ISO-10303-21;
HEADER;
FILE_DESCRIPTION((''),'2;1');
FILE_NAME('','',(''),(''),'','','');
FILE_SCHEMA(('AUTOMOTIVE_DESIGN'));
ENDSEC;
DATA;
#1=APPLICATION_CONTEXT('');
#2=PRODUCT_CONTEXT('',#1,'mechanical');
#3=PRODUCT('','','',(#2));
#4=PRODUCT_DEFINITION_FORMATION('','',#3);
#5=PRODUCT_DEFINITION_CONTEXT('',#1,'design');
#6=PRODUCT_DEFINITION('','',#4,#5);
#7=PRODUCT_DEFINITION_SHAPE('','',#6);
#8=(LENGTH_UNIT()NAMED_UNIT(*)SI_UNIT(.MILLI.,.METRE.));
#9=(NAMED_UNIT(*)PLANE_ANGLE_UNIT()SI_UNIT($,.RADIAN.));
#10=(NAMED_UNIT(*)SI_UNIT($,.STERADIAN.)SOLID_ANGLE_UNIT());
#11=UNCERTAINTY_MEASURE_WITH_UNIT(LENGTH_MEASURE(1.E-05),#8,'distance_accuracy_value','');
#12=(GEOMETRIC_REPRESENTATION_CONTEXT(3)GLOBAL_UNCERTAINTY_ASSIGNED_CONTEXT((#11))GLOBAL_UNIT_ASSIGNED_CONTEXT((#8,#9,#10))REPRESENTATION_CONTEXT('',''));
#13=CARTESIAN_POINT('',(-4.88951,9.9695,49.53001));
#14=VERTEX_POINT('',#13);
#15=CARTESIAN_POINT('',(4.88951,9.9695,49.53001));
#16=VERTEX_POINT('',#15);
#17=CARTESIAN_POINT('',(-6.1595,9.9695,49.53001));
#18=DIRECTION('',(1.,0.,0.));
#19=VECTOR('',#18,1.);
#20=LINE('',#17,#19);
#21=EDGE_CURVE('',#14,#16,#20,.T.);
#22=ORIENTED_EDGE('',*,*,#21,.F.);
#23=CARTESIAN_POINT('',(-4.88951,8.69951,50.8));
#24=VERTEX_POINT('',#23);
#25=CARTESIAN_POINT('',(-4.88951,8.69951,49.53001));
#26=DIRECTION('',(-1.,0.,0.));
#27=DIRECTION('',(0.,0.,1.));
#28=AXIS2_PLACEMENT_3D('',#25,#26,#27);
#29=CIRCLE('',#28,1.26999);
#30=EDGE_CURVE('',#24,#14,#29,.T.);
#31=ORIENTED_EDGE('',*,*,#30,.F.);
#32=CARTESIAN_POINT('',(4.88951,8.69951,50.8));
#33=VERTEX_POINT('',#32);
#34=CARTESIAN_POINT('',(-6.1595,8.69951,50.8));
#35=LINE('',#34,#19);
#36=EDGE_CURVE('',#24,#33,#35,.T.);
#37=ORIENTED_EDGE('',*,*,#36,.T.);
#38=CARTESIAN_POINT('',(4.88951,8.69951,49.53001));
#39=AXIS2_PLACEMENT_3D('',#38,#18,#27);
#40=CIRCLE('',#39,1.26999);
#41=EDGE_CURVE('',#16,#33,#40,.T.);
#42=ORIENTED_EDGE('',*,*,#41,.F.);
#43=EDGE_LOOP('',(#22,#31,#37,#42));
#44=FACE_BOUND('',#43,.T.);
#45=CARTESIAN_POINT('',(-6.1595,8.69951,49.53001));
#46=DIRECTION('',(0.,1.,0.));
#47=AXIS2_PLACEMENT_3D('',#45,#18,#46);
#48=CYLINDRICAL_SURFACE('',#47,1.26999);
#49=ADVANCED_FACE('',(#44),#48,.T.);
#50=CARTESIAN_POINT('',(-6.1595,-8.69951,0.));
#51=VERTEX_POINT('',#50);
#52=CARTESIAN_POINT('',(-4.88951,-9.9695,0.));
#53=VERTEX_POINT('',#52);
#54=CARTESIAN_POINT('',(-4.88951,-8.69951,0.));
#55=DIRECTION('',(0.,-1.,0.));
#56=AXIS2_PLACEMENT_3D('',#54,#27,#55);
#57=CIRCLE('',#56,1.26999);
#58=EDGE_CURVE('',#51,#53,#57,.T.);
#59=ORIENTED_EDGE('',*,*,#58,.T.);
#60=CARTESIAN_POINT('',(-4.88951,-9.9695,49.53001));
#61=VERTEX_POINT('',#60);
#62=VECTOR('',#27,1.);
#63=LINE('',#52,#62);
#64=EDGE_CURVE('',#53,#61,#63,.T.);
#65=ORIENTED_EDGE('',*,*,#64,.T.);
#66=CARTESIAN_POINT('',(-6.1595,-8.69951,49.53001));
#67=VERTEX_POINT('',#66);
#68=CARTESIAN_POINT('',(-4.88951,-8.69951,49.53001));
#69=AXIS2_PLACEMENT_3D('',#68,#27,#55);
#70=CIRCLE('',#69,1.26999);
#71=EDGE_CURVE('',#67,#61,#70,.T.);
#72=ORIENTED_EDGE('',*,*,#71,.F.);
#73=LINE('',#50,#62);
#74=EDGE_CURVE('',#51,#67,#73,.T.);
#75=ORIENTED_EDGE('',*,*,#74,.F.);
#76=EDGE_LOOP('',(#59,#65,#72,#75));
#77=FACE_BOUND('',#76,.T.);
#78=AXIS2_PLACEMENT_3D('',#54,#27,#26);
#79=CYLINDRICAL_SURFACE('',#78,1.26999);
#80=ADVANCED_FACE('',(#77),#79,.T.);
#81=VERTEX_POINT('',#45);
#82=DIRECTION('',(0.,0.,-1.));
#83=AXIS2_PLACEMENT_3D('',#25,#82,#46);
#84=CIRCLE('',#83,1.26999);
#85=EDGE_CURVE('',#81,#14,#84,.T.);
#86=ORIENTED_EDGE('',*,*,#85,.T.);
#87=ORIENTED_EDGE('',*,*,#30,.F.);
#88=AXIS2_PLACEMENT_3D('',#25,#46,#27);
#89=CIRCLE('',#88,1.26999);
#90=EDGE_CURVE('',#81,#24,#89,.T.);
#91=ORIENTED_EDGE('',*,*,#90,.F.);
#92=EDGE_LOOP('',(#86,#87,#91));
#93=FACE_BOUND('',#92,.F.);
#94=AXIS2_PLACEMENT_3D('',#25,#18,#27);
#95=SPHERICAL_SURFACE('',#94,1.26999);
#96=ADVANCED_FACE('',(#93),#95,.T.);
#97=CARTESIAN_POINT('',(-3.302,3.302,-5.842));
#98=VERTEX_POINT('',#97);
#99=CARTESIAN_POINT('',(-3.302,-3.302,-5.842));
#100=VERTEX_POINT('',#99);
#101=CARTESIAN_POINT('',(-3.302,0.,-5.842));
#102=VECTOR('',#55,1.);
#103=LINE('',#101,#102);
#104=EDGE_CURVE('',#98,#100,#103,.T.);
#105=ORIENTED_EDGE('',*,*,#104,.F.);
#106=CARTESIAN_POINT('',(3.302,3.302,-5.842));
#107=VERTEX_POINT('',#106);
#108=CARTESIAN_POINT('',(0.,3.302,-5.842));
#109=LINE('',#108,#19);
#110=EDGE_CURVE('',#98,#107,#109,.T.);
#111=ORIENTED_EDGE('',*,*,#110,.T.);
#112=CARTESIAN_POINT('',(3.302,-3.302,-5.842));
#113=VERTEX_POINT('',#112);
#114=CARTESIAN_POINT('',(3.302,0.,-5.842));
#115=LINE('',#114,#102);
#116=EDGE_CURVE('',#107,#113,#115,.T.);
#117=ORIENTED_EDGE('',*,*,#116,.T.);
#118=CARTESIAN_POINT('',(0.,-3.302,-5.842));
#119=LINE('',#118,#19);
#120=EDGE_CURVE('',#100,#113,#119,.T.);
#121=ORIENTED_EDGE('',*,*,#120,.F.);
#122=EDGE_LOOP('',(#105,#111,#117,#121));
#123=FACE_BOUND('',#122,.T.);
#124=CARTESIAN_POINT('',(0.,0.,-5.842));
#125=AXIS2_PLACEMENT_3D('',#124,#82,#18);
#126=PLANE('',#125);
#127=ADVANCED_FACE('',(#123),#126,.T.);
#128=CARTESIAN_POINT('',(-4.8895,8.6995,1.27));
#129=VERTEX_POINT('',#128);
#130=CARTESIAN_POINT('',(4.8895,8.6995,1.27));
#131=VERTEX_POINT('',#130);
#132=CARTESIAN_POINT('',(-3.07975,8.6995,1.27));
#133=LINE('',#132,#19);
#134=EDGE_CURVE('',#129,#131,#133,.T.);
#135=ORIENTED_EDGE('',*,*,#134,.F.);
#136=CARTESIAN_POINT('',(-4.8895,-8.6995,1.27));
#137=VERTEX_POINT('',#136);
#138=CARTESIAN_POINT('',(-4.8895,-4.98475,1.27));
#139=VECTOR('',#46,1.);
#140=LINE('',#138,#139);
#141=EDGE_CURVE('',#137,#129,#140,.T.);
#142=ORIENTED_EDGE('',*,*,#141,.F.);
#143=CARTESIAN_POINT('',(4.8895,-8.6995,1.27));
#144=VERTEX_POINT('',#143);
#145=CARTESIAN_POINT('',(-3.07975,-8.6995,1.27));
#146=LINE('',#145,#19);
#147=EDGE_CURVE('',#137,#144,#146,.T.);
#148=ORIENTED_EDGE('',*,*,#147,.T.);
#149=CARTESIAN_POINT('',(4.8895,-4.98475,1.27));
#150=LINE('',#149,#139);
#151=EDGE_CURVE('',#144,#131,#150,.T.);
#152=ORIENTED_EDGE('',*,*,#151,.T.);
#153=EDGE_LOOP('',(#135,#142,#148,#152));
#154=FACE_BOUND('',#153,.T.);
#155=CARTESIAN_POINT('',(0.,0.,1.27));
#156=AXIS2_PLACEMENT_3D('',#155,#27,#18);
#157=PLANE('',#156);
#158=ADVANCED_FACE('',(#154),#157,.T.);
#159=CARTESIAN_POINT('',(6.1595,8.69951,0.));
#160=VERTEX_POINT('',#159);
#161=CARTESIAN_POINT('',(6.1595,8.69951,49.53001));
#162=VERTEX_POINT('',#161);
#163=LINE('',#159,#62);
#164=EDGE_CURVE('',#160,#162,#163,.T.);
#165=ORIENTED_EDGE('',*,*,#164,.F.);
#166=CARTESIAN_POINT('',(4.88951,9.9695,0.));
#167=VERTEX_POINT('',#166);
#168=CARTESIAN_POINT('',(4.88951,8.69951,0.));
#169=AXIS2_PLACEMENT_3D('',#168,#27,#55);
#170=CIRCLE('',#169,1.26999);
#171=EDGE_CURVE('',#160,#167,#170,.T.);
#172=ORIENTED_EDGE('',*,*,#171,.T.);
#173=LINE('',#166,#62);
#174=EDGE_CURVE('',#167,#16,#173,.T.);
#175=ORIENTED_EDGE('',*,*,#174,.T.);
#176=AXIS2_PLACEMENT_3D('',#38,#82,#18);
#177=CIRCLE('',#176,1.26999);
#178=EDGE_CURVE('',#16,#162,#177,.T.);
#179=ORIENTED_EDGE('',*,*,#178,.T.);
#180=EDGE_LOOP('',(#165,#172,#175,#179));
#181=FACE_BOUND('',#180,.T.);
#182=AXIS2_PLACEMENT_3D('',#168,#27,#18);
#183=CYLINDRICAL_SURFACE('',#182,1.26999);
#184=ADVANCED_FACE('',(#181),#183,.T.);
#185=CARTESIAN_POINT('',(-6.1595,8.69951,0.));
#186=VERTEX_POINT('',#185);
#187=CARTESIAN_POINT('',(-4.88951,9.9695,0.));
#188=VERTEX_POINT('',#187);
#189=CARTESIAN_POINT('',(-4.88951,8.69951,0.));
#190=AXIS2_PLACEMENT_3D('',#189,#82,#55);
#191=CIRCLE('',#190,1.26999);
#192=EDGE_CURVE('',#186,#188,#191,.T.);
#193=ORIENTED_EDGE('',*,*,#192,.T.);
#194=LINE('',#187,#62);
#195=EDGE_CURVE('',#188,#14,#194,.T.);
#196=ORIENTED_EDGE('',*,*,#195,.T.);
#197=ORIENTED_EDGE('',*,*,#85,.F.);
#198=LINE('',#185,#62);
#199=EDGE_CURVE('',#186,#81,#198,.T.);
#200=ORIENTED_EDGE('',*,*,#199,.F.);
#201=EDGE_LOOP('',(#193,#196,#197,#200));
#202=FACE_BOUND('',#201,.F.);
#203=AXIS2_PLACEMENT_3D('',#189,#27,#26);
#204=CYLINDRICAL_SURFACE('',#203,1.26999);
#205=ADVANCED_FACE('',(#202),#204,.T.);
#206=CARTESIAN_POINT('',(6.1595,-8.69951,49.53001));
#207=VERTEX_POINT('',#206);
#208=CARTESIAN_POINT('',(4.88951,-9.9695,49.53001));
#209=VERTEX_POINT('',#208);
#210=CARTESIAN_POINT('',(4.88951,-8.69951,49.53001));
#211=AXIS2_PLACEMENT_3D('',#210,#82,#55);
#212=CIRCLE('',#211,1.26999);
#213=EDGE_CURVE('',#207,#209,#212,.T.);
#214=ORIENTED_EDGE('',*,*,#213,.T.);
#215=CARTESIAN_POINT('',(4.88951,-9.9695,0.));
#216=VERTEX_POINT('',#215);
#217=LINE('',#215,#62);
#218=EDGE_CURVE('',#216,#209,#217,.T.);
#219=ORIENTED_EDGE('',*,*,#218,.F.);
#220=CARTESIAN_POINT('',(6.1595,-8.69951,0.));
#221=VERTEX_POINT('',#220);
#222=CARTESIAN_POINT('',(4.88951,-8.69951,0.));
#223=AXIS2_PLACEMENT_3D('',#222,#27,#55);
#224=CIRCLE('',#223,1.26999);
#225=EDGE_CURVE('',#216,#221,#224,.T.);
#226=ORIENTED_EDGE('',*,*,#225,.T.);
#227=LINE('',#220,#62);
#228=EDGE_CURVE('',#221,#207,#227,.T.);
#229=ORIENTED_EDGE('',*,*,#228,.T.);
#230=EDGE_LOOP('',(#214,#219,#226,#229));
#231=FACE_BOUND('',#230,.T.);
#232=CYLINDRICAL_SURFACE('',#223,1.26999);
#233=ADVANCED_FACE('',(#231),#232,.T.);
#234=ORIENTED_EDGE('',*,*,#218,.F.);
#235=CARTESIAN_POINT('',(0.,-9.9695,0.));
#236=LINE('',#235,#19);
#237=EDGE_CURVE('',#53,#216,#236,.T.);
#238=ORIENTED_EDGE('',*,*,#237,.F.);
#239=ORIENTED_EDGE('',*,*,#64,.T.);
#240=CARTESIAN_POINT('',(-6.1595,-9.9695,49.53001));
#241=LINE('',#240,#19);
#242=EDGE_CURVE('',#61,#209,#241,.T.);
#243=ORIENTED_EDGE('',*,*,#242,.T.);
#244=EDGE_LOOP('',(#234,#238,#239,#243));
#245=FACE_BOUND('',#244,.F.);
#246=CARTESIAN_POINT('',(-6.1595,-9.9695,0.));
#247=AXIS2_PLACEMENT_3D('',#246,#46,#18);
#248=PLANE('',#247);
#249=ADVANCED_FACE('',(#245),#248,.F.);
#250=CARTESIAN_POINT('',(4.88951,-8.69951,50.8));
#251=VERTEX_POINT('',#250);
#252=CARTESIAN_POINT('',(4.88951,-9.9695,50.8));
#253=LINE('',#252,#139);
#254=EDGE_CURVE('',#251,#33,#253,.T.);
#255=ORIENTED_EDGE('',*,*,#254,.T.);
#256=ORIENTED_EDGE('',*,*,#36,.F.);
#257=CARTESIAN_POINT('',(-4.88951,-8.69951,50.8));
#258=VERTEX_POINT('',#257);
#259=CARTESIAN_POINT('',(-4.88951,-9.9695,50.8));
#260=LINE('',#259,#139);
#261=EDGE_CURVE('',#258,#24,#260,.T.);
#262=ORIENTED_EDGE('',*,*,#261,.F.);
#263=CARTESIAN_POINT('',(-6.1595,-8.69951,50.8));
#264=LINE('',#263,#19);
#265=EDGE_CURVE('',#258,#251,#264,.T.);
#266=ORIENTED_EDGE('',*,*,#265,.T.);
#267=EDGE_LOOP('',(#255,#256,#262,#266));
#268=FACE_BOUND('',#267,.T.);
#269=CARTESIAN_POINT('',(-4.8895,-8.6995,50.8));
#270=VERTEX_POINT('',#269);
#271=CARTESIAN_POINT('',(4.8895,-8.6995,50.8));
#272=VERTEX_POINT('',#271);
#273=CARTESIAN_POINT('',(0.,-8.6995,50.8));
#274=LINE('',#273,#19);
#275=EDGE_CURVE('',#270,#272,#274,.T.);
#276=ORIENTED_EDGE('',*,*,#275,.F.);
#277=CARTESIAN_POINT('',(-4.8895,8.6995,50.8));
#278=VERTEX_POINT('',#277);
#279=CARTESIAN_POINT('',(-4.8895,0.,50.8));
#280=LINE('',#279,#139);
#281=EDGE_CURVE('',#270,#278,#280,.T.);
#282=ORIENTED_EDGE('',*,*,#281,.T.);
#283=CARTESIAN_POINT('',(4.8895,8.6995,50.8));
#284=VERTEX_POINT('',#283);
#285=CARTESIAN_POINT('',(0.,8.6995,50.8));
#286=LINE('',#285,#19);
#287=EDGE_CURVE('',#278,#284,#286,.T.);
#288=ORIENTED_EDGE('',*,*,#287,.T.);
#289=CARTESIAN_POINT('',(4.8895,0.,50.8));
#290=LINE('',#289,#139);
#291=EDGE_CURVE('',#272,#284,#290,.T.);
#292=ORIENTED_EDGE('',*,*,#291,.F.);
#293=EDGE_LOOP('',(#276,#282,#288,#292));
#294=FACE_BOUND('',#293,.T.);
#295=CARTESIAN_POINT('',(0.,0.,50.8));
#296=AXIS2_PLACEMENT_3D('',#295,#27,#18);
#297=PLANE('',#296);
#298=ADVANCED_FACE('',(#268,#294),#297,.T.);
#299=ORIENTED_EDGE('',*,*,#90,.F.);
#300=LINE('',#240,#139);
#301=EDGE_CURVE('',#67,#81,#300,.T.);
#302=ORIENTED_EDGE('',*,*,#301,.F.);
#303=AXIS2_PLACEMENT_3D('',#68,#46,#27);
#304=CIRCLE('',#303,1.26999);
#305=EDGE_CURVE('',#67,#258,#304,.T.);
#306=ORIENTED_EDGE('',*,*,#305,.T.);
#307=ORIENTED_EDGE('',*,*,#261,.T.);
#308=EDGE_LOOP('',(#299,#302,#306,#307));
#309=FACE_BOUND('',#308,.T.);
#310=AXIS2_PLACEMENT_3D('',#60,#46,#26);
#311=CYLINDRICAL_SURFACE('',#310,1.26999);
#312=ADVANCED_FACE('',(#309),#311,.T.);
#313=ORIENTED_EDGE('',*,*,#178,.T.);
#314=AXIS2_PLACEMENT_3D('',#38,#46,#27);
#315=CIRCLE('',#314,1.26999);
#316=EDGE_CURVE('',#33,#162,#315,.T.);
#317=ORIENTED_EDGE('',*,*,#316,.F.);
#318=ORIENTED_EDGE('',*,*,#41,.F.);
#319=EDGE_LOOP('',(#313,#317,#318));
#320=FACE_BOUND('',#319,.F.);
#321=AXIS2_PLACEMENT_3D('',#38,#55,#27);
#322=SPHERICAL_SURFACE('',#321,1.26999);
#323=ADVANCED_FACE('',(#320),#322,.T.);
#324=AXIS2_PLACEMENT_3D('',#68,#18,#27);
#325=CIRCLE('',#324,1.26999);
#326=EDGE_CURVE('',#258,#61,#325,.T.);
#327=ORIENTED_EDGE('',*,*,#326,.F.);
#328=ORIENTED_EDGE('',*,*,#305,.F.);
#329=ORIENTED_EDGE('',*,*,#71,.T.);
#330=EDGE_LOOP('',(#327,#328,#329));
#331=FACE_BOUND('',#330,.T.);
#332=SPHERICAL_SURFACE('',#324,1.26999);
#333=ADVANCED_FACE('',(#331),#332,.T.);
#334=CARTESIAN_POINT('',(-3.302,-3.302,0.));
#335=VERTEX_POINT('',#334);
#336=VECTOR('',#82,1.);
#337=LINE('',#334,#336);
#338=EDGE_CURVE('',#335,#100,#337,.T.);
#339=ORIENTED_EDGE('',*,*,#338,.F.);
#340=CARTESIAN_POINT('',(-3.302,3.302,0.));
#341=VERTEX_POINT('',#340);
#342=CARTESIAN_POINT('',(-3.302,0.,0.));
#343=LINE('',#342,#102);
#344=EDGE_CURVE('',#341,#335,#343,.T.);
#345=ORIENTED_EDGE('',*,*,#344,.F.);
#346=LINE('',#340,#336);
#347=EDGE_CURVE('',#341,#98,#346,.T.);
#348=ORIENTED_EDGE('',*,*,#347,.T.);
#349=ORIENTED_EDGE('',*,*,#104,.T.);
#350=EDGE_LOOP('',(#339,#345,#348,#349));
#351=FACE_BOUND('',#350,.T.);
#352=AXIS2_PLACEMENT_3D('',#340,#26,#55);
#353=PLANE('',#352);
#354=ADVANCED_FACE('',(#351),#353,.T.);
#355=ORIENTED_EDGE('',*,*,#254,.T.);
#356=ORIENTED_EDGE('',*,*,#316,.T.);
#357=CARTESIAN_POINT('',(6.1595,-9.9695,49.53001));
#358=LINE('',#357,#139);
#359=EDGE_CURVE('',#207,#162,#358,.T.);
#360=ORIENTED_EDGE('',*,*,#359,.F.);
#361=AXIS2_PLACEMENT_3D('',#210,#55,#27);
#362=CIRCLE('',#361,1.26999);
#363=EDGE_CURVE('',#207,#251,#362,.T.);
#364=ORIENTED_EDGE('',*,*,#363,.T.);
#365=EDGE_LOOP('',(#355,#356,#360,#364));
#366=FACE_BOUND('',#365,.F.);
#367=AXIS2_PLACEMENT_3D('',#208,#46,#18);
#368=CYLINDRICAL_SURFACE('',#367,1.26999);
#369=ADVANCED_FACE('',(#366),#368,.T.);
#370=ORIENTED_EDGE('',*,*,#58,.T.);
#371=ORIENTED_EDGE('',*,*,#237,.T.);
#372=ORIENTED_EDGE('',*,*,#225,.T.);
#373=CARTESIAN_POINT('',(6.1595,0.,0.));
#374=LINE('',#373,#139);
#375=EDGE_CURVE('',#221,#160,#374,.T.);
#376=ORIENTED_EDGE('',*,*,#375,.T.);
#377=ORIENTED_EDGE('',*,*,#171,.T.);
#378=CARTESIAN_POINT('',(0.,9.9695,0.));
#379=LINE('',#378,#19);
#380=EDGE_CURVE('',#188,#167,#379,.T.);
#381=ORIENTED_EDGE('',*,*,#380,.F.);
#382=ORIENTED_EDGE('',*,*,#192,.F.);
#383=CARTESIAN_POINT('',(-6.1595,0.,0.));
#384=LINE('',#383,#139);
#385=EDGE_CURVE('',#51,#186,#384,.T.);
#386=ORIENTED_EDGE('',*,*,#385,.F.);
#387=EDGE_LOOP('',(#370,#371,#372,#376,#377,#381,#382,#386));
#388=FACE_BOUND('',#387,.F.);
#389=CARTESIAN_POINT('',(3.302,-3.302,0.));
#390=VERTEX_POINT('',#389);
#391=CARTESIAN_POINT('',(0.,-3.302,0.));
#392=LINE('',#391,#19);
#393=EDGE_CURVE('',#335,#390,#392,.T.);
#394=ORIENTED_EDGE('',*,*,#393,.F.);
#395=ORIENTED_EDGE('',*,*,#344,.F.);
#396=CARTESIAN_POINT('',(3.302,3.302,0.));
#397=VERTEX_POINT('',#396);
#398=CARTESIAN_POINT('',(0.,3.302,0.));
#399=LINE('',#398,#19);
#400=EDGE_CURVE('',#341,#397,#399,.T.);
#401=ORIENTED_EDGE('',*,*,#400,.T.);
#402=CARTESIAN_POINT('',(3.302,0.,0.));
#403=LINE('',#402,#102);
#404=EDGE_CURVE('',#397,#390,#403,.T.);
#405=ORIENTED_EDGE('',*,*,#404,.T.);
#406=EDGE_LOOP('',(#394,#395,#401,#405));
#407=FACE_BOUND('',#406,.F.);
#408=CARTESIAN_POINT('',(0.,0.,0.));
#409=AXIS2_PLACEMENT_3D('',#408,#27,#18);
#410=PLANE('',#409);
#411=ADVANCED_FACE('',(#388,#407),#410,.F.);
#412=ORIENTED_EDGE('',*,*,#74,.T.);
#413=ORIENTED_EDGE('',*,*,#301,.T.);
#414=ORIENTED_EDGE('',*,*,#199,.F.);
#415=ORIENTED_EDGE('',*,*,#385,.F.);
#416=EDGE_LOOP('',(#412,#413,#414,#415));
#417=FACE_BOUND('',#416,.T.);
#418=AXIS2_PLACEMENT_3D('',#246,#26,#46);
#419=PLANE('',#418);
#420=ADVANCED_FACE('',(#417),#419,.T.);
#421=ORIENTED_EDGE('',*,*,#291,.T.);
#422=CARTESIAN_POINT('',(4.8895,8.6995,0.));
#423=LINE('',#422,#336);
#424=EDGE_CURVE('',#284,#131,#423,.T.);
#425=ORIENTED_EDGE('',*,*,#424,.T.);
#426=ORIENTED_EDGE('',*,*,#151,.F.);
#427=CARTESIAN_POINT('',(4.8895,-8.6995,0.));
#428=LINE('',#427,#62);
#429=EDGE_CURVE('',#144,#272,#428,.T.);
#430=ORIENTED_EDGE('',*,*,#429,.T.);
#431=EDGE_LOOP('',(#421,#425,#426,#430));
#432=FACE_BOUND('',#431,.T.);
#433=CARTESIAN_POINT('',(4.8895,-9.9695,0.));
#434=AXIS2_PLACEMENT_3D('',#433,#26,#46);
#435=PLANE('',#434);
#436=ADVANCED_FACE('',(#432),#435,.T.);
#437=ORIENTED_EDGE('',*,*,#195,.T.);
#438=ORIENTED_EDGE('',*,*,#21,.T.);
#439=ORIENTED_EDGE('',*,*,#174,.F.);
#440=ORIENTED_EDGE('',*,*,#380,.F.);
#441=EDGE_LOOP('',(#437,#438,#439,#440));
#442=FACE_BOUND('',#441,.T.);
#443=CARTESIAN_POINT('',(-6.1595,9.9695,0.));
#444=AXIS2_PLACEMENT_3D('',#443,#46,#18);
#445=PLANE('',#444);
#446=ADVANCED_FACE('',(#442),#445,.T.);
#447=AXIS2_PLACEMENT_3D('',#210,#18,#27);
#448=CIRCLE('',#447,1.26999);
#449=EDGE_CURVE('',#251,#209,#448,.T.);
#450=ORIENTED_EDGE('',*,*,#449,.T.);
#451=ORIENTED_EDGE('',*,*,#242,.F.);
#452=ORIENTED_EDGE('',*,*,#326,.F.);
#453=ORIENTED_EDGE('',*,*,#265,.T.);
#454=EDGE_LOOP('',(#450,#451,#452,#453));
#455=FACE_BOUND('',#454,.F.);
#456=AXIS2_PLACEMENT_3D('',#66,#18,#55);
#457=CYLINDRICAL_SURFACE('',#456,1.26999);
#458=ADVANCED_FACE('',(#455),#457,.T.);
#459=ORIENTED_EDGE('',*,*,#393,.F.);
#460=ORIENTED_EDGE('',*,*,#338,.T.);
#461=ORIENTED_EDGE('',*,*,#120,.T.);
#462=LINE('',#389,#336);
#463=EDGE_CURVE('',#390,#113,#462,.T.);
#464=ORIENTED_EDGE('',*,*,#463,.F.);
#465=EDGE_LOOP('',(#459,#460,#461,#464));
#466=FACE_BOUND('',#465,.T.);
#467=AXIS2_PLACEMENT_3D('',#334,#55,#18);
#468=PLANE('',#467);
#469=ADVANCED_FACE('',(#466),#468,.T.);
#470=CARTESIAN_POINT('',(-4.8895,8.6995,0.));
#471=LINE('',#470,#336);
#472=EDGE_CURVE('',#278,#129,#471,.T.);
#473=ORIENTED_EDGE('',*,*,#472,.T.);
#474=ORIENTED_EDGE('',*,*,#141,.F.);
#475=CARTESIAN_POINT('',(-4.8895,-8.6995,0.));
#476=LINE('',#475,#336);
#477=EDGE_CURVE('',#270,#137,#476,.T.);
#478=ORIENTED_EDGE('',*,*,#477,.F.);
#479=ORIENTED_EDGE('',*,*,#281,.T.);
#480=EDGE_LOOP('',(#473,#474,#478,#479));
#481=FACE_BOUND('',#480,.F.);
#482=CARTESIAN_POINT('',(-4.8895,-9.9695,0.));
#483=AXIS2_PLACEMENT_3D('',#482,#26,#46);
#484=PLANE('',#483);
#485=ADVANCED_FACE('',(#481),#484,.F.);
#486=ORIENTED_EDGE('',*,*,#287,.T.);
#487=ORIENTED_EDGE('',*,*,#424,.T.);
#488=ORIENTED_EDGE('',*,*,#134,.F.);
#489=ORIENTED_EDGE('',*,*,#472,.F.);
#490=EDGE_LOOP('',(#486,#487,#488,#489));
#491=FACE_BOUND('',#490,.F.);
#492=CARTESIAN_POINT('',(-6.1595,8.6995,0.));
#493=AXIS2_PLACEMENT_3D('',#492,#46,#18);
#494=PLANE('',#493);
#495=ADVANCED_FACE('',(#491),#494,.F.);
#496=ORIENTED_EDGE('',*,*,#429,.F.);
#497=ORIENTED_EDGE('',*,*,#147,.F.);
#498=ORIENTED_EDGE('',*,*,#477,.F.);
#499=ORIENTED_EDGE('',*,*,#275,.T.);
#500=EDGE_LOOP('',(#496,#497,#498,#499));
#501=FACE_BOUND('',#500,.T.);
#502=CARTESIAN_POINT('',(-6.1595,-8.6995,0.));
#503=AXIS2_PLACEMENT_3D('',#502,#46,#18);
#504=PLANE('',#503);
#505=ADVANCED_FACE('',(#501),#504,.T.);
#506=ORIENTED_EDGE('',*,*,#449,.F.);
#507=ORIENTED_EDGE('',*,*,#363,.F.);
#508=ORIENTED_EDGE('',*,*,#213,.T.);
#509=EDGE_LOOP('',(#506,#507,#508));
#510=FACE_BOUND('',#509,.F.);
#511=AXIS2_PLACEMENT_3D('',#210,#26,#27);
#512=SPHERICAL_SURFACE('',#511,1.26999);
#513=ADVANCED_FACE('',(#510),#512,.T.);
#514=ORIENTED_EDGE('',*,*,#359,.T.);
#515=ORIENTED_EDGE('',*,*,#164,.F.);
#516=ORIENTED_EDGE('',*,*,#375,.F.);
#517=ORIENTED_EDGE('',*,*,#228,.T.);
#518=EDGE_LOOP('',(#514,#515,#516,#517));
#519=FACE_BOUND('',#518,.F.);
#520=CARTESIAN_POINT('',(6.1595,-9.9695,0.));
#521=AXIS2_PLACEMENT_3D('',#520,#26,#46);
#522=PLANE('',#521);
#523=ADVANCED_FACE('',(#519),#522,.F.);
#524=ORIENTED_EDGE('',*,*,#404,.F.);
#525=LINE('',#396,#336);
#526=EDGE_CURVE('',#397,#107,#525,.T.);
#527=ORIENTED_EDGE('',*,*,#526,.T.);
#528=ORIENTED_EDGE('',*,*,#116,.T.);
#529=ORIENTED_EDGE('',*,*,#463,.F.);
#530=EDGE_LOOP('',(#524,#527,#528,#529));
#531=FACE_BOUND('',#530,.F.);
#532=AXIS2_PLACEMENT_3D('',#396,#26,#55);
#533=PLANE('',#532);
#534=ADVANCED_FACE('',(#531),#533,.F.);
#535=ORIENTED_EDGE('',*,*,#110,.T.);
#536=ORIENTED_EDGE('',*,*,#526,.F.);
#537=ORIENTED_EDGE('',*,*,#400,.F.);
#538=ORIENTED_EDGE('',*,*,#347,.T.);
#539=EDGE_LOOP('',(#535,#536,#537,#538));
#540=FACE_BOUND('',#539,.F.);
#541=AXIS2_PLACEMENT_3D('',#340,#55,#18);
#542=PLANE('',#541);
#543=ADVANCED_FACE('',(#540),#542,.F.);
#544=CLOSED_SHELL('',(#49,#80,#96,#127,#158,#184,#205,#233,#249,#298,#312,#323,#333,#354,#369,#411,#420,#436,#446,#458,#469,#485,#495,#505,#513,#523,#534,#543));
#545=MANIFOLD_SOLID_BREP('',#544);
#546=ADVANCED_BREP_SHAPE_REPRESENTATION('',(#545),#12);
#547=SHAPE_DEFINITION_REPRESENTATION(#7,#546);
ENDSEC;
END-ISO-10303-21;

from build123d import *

# Parameters (mm, degrees)
F0_W     = 12.319
F0_H     = 19.939
F1_DEPTH = 50.8
F2_T     = -1.27
F3_R     = 1.26999
F4_W     = 6.604
F4_H     = 6.604
F5_DEPTH = 5.842


# Not quite as in the source:
# - a fillet or chamfer is up to 0.001 mm smaller than in the source, because OpenCascade refuses the exact size


with BuildPart() as f1:
    # F0 (on Top) → F1 (new body)
    with BuildSketch(Plane.XY):
        Rectangle(F0_W, F0_H)
    extrude(amount=F1_DEPTH)

    # F2
    f2_openings = [f1.faces().sort_by_distance(p)[0] for p in [
        (0, 0, 50.8),
    ]]
    offset(amount=F2_T, openings=f2_openings)

    # F3 (radius 1.27 in the source; OpenCascade refuses exactly that, so slightly less here)
    f3_edges = [f1.edges().sort_by_distance(p)[0] for p in [
        (0, -9.9695, 50.8),
        (6.1595, 0, 50.8),
        (0, 9.9695, 50.8),
        (-6.1595, 0, 50.8),
        (-6.1595, -9.9695, 25.4),
        (6.1595, -9.9695, 25.4),
        (6.1595, 9.9695, 25.4),
        (-6.1595, 9.9695, 25.4),
    ]]
    fillet(f3_edges, radius=F3_R)

    # F4 (on face) → F5 (join)
    with BuildSketch(Plane(origin=(0, 0, 0), x_dir=(1, 0, 0), z_dir=(0, 0, -1))):
        Rectangle(F4_W, F4_H)
    extrude(amount=F5_DEPTH)


solid = f1.part
